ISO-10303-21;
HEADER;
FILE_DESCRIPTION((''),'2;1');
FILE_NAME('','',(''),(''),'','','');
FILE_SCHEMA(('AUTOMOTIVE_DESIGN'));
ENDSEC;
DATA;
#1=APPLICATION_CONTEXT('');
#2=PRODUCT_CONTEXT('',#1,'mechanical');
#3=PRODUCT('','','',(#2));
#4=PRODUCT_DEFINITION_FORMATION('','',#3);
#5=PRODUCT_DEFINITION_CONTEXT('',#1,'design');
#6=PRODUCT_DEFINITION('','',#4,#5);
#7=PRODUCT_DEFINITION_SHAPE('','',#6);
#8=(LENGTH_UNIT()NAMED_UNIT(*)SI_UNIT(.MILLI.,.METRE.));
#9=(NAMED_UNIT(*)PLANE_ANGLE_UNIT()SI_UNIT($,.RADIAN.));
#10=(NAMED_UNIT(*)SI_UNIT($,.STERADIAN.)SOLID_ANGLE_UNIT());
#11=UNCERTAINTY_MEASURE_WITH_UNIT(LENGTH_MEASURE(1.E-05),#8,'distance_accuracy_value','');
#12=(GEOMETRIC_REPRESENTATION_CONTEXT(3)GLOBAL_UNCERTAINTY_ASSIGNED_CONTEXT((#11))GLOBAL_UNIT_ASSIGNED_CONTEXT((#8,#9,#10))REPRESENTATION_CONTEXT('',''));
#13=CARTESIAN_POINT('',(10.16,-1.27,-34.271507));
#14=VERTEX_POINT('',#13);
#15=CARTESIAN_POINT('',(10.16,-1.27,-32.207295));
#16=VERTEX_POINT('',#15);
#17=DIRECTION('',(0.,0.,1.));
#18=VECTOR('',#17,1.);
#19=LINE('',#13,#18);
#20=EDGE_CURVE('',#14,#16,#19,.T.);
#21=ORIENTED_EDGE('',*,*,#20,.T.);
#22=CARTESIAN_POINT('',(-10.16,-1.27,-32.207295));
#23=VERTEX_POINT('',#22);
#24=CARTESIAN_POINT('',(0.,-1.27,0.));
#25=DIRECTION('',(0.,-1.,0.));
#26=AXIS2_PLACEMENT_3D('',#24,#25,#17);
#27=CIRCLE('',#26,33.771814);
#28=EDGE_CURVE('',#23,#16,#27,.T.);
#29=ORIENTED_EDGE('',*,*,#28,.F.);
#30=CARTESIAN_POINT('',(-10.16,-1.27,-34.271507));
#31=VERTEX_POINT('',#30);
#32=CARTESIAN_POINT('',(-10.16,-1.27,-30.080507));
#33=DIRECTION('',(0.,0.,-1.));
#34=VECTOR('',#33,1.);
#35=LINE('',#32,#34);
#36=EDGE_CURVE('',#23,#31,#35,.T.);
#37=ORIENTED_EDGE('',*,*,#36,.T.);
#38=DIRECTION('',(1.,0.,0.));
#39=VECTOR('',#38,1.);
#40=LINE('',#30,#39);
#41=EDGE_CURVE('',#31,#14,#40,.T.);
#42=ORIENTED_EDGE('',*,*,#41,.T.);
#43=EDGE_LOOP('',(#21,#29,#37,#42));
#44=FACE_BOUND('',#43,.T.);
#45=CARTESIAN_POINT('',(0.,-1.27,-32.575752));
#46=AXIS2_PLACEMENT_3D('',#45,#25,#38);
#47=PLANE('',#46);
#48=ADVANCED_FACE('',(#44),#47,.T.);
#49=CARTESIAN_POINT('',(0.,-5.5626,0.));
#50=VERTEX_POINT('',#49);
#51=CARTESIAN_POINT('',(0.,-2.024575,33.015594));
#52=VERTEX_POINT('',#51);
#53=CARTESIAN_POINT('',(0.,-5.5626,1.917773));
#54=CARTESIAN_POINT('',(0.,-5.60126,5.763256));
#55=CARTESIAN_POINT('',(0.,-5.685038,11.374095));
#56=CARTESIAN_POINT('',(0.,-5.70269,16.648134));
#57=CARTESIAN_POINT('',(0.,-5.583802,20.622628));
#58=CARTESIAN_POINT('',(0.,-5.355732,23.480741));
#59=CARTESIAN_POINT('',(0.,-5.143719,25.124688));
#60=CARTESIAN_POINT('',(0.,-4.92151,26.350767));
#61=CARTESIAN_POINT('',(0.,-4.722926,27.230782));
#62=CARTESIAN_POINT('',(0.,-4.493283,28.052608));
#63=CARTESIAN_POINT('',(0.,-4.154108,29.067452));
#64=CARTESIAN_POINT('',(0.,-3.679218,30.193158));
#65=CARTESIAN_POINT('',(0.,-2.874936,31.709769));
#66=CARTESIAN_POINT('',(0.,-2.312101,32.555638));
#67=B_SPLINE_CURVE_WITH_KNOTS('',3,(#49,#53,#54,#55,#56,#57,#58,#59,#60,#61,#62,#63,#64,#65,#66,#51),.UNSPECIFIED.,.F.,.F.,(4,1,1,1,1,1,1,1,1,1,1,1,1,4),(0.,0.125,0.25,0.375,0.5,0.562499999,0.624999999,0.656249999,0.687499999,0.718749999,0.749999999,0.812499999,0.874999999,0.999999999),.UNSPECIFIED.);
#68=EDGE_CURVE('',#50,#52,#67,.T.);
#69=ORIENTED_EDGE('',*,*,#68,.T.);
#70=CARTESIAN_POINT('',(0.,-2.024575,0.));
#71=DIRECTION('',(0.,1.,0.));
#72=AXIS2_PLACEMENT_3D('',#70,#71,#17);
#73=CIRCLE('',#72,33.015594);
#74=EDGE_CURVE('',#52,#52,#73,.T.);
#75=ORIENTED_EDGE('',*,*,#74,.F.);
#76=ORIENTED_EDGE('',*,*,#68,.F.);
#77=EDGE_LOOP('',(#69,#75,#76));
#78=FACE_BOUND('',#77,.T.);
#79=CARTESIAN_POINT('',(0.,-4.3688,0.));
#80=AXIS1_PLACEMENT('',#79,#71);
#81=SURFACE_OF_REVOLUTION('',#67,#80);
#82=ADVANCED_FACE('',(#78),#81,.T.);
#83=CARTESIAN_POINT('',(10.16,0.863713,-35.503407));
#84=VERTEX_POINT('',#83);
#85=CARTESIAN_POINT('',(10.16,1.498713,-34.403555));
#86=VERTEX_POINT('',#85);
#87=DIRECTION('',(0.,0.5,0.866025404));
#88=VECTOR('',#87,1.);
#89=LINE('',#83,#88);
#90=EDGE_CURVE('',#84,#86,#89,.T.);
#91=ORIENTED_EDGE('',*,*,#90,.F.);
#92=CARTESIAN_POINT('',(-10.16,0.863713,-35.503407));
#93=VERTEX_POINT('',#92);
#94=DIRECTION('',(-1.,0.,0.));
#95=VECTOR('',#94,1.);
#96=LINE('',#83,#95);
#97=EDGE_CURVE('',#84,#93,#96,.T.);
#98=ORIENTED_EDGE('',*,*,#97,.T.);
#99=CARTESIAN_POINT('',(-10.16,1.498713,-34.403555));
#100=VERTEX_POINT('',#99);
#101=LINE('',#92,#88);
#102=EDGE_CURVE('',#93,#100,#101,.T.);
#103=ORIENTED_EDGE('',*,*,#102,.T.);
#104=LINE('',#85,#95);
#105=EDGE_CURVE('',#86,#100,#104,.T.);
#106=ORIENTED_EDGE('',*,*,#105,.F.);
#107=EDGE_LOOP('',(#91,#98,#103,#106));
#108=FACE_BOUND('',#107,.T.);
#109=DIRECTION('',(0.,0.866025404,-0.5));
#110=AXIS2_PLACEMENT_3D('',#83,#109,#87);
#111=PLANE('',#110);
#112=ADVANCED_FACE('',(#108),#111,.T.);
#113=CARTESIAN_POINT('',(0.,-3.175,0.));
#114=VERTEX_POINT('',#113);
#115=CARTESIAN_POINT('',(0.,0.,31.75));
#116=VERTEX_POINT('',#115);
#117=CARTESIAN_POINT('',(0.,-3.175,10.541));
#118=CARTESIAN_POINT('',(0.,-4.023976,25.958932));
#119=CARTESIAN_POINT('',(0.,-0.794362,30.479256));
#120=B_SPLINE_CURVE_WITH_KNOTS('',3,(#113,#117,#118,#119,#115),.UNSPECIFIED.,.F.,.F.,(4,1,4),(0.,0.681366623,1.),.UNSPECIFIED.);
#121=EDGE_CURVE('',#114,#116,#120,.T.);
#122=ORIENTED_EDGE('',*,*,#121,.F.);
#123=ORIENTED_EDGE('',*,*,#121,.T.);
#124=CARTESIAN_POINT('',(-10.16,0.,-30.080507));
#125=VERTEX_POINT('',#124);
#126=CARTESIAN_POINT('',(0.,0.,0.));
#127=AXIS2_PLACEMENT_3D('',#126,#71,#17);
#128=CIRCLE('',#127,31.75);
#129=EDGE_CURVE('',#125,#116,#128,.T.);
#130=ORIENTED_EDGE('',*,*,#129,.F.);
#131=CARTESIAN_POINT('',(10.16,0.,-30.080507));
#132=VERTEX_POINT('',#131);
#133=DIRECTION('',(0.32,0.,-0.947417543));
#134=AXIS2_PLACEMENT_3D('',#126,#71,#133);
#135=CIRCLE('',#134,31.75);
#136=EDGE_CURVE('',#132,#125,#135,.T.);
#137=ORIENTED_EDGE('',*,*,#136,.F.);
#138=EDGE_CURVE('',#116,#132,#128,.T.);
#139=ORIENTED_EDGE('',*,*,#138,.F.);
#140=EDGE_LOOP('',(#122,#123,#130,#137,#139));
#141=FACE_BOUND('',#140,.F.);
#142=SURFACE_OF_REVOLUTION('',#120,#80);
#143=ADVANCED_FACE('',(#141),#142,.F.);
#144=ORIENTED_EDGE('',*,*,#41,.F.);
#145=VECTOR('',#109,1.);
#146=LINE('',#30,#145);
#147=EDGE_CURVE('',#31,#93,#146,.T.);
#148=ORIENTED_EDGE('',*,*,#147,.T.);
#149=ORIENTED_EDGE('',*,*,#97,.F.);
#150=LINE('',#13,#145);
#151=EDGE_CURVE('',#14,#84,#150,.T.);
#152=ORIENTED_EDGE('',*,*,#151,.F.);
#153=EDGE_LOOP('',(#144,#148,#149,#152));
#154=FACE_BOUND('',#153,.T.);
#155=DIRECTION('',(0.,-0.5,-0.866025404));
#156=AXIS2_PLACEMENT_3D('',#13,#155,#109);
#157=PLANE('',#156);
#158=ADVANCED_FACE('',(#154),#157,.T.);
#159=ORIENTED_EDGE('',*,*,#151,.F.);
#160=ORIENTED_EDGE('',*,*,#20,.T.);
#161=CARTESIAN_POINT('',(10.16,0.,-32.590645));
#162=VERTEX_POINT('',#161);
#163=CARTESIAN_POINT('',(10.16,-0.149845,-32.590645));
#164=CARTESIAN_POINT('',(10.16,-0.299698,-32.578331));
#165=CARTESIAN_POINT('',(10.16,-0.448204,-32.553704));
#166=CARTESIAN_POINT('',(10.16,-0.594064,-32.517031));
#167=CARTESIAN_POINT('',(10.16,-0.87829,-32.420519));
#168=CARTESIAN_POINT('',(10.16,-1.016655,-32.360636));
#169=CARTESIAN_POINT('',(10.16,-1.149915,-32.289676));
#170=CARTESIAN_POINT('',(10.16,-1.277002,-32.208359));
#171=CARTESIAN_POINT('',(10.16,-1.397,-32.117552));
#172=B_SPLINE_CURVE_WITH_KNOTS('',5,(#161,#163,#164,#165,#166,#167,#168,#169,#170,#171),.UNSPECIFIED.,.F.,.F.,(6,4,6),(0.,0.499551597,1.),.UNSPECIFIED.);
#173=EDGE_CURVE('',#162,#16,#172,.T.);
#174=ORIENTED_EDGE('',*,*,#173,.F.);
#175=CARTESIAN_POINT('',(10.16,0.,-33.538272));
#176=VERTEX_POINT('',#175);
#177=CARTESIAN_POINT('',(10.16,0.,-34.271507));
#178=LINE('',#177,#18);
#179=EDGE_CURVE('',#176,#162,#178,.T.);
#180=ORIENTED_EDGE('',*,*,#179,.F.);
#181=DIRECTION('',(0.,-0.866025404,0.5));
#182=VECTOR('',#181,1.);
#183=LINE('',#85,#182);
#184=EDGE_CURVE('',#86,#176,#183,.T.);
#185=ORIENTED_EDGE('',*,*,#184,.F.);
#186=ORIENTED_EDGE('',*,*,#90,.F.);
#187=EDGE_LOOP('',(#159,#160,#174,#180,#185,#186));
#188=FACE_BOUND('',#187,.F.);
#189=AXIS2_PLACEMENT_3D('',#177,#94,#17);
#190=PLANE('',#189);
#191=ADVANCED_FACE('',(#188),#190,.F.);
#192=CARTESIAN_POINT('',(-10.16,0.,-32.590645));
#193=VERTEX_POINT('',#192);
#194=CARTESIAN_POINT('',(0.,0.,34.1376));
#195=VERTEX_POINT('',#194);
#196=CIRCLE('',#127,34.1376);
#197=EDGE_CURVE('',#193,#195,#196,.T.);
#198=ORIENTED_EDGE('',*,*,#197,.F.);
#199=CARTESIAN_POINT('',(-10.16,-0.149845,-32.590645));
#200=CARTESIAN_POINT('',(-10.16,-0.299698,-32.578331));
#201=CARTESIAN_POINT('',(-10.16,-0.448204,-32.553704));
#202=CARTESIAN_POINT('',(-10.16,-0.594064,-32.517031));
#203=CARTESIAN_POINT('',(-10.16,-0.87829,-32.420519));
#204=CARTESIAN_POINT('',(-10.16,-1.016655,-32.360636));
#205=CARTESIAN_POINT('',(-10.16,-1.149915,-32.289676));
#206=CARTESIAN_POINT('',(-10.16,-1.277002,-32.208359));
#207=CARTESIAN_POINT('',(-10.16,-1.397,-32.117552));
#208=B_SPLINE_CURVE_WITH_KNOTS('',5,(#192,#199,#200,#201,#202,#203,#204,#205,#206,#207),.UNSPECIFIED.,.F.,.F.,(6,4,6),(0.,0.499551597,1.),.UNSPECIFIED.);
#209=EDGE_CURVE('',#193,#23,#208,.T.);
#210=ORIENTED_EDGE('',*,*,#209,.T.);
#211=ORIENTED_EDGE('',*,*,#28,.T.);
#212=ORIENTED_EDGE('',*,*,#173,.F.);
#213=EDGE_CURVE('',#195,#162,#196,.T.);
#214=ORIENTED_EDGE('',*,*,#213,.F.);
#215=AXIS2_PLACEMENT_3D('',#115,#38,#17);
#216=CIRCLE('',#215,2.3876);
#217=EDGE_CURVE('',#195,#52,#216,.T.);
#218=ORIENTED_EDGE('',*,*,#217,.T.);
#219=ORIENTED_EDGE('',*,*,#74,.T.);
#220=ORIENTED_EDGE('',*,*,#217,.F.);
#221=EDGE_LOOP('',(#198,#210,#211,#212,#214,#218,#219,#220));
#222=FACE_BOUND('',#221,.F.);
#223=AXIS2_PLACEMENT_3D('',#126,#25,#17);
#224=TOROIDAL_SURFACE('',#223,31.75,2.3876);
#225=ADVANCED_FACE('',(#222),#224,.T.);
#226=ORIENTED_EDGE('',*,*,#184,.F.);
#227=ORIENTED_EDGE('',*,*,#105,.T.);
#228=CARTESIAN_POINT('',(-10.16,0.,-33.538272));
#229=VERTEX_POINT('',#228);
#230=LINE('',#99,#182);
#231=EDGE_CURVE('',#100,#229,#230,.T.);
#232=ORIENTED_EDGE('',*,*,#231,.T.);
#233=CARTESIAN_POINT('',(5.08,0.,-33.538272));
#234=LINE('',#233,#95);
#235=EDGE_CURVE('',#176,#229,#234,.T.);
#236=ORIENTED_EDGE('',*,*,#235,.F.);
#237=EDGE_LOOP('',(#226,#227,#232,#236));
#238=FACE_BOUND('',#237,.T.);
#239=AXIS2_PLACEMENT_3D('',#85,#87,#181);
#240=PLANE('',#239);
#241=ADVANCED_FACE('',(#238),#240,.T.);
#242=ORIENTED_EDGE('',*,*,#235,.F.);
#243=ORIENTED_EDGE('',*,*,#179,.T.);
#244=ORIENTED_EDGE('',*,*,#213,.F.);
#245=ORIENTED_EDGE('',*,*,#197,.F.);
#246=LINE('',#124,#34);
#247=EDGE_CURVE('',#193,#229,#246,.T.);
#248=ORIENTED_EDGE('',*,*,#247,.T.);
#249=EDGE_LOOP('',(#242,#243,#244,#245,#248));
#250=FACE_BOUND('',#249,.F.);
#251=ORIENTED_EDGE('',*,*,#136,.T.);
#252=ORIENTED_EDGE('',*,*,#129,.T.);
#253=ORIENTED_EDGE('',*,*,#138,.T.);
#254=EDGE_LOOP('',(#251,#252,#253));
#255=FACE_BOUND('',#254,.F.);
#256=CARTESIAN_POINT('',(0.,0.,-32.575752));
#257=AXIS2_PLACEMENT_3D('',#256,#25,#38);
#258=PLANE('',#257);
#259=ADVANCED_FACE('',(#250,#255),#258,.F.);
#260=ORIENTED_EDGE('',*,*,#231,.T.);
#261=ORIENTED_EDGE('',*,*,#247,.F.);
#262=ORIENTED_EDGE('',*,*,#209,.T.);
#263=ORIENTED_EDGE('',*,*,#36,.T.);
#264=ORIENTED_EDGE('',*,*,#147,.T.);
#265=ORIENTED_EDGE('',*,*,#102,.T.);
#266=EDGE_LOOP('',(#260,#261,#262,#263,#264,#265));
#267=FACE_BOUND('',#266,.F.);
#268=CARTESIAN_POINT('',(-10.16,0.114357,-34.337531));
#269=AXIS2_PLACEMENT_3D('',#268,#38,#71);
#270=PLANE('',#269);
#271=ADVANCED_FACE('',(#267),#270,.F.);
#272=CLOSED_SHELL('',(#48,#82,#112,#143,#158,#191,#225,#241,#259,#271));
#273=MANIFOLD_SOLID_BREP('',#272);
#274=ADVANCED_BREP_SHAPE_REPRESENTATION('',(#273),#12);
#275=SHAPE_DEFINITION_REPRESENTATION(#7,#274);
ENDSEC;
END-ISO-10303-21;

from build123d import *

# Parameters (mm, degrees)
F3_DEPTH = 1.27
F5_DEPTH = 20.32


# Not quite as in the source:
# - the dataset's text gives a spline's control points without its knots; the knots are read off the source's solid


with BuildPart() as f1:
    # F0 (on Right) → F1 (revolve)
    with BuildSketch(Plane.YZ):
        with BuildLine():
            Line((-5.5626, 0), (-3.175, 0))
            add(Edge.make_bspline(
                [(-3.175, 0), (-3.175, 10.541), (-4.0239762357, 25.9589322905), (-0.7943624519, 30.4792560231), (0, 31.75)],
                knots=[0, 0, 0, 0, 0.6813666235, 1, 1, 1, 1], degree=3))
            Line((0, 31.75), (0, 34.1376))
            ThreePointArc((0, 34.1376), (-1.1573462176, 33.8383446776), (-2.0245751497, 33.015594415))
            add(Edge.make_bspline(
                [(-5.5626, 0), (-5.5626, 1.9177725401), (-5.6012595175, 5.763256361), (-5.6850380944, 11.3740945743), (-5.7026900101, 16.6481342132), (-5.5838020802, 20.622627977), (-5.3557319657, 23.480741035), (-5.1437190397, 25.1246883423), (-4.9215103036, 26.3507670581), (-4.7229256392, 27.2307815663), (-4.4932831777, 28.052608441), (-4.1541081797, 29.0674517161), (-3.6792176979, 30.1931579589), (-2.8749355371, 31.7097687785), (-2.3121014901, 32.5556376731), (-2.0245751497, 33.015594415)],
                knots=[0, 0, 0, 0, 0.1249999999, 0.2499999998, 0.3749999996, 0.4999999995, 0.5624999995, 0.6249999994, 0.6562499994, 0.6874999993, 0.7187499993, 0.7499999993, 0.8124999992, 0.8749999991, 0.999999999, 0.999999999, 0.999999999, 0.999999999], degree=3))
        make_face()
    revolve(axis=Axis((0, -4.3688, 0), (0, 1, 0)))

    # F2 (on Front) → F3 (join)
    with BuildSketch(Plane.XZ):
        with BuildLine():
            Line((10.16, -34.2715069771), (10.16, -30.0805069771))
            ThreePointArc((10.16, -30.0805069771), (0, -31.75), (-10.16, -30.0805069771))
            Line((-10.16, -30.0805069771), (-10.16, -34.2715069771))
            Line((-10.16, -34.2715069771), (10.16, -34.2715069771))
        make_face()
    extrude(amount=F3_DEPTH)

    # F4 (on face) → F5 (join)
    with BuildSketch(Plane.YZ.offset(10.16)):
        Polygon((-0.635, -33.1716547143), (-1.27, -34.2715069771), (0.8637133898, -35.5034069771), (1.4987133898, -34.4035547143), align=None)
    extrude(amount=-F5_DEPTH)


solid = f1.part
